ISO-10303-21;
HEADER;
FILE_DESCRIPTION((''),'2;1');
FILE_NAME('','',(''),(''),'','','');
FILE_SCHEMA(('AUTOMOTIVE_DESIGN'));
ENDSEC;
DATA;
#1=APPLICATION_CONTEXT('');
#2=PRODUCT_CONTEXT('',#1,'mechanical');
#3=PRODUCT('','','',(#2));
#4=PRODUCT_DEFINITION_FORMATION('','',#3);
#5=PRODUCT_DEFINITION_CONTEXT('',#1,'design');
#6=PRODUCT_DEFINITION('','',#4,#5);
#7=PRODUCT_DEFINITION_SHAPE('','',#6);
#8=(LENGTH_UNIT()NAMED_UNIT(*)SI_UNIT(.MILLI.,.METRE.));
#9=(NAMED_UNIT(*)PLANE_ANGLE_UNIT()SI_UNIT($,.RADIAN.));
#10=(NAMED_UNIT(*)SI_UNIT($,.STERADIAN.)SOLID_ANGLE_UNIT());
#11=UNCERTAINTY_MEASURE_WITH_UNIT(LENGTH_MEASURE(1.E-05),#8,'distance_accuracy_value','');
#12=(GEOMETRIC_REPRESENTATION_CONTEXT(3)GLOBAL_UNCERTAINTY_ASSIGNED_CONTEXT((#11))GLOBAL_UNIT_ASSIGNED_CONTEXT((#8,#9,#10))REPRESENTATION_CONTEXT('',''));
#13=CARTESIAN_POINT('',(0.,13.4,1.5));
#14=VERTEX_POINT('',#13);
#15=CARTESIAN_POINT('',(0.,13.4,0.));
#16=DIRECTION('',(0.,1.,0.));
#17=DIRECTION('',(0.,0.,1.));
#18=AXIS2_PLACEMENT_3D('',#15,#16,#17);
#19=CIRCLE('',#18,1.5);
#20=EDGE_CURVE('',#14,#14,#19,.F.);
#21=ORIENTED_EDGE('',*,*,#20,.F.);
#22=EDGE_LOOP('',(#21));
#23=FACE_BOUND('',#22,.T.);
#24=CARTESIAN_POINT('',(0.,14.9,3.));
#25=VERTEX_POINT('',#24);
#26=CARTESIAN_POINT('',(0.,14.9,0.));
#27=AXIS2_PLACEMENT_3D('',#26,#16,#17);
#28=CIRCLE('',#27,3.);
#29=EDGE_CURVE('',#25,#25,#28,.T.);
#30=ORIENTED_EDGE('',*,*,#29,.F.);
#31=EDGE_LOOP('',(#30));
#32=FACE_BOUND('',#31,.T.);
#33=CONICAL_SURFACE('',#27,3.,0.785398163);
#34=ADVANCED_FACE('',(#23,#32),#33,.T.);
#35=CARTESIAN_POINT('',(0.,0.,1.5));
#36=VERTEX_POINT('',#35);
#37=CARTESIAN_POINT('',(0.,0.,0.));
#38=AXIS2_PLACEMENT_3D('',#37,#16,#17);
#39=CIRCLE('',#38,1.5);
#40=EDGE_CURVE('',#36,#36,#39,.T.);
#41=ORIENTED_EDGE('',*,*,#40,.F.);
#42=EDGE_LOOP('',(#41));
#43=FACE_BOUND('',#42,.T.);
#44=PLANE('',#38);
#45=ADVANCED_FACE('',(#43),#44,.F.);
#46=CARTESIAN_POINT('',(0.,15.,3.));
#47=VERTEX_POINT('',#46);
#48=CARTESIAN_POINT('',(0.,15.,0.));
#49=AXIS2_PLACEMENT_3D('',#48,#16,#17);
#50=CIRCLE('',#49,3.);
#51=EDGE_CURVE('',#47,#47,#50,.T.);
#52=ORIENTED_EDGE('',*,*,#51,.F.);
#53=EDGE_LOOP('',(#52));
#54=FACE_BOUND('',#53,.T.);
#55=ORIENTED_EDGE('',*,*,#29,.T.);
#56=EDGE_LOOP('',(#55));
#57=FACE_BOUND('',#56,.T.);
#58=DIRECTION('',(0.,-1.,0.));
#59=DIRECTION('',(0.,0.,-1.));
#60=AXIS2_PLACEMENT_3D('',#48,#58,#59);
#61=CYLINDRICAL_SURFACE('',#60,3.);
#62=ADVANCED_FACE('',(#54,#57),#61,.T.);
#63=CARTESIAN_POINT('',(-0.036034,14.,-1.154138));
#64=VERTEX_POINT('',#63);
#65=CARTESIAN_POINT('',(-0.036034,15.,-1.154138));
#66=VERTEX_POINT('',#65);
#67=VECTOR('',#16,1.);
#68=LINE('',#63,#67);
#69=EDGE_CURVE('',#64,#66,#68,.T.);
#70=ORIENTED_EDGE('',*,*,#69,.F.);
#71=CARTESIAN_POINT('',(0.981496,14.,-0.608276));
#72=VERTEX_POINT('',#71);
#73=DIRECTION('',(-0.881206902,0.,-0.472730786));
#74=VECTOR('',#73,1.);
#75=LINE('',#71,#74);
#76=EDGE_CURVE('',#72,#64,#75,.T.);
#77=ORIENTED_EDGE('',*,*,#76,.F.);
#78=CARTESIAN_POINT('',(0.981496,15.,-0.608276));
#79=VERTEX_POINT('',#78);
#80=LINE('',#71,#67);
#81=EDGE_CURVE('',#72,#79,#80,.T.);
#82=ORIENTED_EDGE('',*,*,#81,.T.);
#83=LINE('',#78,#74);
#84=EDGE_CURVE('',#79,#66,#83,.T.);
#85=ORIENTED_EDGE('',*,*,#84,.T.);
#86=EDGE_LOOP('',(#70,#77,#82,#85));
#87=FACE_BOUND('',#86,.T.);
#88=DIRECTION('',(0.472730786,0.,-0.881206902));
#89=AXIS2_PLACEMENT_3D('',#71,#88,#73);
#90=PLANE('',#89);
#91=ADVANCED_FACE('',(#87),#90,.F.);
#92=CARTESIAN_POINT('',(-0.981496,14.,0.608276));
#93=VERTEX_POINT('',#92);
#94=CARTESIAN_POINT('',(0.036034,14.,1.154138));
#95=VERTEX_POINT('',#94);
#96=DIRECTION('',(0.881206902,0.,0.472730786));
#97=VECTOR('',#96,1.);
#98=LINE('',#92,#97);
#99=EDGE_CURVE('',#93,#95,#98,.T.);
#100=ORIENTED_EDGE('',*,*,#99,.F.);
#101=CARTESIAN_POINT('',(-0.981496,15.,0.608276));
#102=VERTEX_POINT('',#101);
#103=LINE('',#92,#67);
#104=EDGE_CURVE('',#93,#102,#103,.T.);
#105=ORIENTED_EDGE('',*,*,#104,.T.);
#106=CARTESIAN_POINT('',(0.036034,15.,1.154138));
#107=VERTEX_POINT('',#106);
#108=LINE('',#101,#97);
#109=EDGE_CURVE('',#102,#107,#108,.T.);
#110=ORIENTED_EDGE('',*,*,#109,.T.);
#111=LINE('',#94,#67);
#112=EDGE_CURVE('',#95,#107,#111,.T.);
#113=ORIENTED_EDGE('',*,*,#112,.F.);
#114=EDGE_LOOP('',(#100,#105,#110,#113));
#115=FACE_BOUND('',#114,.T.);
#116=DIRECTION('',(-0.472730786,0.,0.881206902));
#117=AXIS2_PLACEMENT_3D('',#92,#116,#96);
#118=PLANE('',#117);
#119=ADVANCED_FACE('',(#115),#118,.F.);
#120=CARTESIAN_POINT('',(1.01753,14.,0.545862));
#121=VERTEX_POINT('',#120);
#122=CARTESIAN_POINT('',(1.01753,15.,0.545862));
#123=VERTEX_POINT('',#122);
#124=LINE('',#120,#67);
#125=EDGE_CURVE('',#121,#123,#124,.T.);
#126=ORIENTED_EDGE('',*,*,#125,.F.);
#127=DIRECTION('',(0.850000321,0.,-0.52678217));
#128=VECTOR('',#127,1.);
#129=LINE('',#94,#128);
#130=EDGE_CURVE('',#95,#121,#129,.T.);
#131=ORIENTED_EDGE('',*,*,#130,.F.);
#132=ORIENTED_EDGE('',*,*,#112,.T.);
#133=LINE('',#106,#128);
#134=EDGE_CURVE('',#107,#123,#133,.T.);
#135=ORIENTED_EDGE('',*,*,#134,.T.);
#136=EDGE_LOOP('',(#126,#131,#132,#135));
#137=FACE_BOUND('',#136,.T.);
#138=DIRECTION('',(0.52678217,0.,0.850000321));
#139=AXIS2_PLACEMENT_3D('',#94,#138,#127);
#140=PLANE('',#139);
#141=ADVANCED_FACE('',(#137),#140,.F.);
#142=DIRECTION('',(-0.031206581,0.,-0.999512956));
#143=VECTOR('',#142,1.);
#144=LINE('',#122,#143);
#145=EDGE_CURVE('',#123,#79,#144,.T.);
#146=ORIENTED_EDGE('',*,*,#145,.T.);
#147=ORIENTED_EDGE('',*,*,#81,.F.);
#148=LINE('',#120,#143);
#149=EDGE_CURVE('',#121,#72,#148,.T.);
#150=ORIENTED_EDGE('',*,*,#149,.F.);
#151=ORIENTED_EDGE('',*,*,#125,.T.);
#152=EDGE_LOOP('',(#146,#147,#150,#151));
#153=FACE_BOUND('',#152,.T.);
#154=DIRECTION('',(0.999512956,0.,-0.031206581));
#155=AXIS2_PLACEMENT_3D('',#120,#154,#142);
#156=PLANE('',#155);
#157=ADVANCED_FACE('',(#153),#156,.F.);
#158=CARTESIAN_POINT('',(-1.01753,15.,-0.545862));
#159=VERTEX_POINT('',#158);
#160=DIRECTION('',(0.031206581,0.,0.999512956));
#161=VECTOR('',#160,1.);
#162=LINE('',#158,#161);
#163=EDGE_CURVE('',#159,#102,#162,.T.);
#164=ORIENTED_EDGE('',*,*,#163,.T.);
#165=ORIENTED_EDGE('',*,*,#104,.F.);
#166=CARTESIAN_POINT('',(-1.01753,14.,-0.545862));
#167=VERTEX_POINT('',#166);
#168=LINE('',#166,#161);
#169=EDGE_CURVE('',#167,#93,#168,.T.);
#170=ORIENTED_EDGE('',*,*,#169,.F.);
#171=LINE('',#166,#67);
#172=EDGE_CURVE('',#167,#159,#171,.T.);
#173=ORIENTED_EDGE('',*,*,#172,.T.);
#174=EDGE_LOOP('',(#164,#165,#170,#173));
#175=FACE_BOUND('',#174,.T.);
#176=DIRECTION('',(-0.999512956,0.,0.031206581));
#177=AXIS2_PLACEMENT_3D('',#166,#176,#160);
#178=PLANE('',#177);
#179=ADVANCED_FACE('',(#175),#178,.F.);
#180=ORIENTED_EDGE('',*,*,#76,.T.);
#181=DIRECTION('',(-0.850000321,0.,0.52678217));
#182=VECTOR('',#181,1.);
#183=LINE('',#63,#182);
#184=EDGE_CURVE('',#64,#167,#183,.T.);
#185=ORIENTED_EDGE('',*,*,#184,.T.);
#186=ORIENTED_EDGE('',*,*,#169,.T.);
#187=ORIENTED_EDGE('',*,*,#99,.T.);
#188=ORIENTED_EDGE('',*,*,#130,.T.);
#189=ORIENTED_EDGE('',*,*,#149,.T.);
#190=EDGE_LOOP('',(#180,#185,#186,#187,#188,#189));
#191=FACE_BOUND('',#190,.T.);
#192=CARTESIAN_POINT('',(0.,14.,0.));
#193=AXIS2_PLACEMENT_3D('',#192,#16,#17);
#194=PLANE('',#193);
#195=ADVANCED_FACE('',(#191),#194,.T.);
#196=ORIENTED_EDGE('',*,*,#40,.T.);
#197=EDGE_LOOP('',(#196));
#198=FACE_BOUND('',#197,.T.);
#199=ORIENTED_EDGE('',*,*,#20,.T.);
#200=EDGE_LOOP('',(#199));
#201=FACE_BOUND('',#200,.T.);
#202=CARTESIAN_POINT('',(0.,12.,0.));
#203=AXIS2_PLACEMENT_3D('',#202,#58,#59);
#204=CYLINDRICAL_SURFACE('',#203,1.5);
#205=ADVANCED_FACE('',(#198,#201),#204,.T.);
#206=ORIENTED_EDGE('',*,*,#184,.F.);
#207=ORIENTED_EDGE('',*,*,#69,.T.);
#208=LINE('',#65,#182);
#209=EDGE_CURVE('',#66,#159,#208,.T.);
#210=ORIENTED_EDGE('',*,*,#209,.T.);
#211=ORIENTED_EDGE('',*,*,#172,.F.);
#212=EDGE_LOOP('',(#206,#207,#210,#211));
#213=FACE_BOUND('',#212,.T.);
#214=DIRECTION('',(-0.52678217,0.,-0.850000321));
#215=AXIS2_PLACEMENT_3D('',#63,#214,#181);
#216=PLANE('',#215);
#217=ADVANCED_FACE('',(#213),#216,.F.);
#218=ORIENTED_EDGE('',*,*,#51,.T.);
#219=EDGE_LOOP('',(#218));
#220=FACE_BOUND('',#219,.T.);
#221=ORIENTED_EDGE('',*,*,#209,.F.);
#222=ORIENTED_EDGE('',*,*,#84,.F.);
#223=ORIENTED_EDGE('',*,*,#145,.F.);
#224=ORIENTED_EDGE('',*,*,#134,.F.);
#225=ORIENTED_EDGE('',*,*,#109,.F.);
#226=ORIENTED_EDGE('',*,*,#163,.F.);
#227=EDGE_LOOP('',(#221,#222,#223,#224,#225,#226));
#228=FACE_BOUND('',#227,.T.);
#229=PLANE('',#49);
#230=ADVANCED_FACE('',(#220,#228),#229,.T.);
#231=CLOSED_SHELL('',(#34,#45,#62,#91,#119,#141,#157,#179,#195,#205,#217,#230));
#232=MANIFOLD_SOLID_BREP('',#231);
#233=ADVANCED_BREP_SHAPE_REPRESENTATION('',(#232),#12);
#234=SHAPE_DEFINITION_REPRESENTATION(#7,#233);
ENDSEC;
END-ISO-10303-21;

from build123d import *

# Parameters (mm, degrees)
SKETCH_1_R          = 1.5
EXTRUDE_1_DEPTH     = 12
SKETCH_2_R          = 3
EXTRUDE_2_DEPTH     = 3
CHAMFER_1_SIZE      = 2.9
CUT_EXTRUDE_1_DEPTH = 1


with BuildPart() as part:
    # 草图1 → 凸台-拉伸1 (new body)
    with BuildSketch(Plane(origin=(0, 0, 0), x_dir=(1, 0, 0), z_dir=(0, 1, 0))):
        with Locations(Location((0, 0, 0), (0, 0, 270))):
            Circle(SKETCH_1_R)
    extrude(amount=EXTRUDE_1_DEPTH)

    # 草图2 → 凸台-拉伸2 (add)
    with BuildSketch(Plane(origin=(0, 12, 0), x_dir=(1, 0, 0), z_dir=(0, 1, 0))):
        with Locations(Location((0, 0, 0), (0, 0, 270))):
            Circle(SKETCH_2_R)
    extrude(amount=EXTRUDE_2_DEPTH)

    # 倒角1
    # the kernel refuses this chamfer: 2.9 mm, written as the material it takes off along each edge
    with BuildSketch(Plane(origin=(0, 12, 0), x_dir=(0, 0, 1), z_dir=(-1, 0, 0))) as chamfer_1_piece_1_section:
        Polygon((3, CHAMFER_1_SIZE), (3 - CHAMFER_1_SIZE, 0), (3, 0), align=None)
    chamfer_1_piece_1 = revolve(axis=Axis((0, 12, 0), (0, 1, 0)), mode=Mode.PRIVATE)
    chamfer_1_piece_1 = chamfer_1_piece_1 - Plane(origin=(0, 14.16453564, 0), x_dir=(0, 0, 1), z_dir=(0, -1, 0)) * Cylinder(1.5, 12, mode=Mode.PRIVATE)
    add(chamfer_1_piece_1, mode=Mode.SUBTRACT)

    # 草图3 → 切除-拉伸1 (cut)
    with BuildSketch(Plane(origin=(0, 15, 0), x_dir=(1, 0, 0), z_dir=(0, 1, 0))):
        Polygon((1.017530084, -0.545862493), (0.981495828, 0.608275655), (-0.036034256, 1.154138148), (-1.017530084, 0.545862493), (-0.981495828, -0.608275655), (0.036034256, -1.154138148), align=None)
    extrude(amount=-CUT_EXTRUDE_1_DEPTH, mode=Mode.SUBTRACT)


solid = part.part
